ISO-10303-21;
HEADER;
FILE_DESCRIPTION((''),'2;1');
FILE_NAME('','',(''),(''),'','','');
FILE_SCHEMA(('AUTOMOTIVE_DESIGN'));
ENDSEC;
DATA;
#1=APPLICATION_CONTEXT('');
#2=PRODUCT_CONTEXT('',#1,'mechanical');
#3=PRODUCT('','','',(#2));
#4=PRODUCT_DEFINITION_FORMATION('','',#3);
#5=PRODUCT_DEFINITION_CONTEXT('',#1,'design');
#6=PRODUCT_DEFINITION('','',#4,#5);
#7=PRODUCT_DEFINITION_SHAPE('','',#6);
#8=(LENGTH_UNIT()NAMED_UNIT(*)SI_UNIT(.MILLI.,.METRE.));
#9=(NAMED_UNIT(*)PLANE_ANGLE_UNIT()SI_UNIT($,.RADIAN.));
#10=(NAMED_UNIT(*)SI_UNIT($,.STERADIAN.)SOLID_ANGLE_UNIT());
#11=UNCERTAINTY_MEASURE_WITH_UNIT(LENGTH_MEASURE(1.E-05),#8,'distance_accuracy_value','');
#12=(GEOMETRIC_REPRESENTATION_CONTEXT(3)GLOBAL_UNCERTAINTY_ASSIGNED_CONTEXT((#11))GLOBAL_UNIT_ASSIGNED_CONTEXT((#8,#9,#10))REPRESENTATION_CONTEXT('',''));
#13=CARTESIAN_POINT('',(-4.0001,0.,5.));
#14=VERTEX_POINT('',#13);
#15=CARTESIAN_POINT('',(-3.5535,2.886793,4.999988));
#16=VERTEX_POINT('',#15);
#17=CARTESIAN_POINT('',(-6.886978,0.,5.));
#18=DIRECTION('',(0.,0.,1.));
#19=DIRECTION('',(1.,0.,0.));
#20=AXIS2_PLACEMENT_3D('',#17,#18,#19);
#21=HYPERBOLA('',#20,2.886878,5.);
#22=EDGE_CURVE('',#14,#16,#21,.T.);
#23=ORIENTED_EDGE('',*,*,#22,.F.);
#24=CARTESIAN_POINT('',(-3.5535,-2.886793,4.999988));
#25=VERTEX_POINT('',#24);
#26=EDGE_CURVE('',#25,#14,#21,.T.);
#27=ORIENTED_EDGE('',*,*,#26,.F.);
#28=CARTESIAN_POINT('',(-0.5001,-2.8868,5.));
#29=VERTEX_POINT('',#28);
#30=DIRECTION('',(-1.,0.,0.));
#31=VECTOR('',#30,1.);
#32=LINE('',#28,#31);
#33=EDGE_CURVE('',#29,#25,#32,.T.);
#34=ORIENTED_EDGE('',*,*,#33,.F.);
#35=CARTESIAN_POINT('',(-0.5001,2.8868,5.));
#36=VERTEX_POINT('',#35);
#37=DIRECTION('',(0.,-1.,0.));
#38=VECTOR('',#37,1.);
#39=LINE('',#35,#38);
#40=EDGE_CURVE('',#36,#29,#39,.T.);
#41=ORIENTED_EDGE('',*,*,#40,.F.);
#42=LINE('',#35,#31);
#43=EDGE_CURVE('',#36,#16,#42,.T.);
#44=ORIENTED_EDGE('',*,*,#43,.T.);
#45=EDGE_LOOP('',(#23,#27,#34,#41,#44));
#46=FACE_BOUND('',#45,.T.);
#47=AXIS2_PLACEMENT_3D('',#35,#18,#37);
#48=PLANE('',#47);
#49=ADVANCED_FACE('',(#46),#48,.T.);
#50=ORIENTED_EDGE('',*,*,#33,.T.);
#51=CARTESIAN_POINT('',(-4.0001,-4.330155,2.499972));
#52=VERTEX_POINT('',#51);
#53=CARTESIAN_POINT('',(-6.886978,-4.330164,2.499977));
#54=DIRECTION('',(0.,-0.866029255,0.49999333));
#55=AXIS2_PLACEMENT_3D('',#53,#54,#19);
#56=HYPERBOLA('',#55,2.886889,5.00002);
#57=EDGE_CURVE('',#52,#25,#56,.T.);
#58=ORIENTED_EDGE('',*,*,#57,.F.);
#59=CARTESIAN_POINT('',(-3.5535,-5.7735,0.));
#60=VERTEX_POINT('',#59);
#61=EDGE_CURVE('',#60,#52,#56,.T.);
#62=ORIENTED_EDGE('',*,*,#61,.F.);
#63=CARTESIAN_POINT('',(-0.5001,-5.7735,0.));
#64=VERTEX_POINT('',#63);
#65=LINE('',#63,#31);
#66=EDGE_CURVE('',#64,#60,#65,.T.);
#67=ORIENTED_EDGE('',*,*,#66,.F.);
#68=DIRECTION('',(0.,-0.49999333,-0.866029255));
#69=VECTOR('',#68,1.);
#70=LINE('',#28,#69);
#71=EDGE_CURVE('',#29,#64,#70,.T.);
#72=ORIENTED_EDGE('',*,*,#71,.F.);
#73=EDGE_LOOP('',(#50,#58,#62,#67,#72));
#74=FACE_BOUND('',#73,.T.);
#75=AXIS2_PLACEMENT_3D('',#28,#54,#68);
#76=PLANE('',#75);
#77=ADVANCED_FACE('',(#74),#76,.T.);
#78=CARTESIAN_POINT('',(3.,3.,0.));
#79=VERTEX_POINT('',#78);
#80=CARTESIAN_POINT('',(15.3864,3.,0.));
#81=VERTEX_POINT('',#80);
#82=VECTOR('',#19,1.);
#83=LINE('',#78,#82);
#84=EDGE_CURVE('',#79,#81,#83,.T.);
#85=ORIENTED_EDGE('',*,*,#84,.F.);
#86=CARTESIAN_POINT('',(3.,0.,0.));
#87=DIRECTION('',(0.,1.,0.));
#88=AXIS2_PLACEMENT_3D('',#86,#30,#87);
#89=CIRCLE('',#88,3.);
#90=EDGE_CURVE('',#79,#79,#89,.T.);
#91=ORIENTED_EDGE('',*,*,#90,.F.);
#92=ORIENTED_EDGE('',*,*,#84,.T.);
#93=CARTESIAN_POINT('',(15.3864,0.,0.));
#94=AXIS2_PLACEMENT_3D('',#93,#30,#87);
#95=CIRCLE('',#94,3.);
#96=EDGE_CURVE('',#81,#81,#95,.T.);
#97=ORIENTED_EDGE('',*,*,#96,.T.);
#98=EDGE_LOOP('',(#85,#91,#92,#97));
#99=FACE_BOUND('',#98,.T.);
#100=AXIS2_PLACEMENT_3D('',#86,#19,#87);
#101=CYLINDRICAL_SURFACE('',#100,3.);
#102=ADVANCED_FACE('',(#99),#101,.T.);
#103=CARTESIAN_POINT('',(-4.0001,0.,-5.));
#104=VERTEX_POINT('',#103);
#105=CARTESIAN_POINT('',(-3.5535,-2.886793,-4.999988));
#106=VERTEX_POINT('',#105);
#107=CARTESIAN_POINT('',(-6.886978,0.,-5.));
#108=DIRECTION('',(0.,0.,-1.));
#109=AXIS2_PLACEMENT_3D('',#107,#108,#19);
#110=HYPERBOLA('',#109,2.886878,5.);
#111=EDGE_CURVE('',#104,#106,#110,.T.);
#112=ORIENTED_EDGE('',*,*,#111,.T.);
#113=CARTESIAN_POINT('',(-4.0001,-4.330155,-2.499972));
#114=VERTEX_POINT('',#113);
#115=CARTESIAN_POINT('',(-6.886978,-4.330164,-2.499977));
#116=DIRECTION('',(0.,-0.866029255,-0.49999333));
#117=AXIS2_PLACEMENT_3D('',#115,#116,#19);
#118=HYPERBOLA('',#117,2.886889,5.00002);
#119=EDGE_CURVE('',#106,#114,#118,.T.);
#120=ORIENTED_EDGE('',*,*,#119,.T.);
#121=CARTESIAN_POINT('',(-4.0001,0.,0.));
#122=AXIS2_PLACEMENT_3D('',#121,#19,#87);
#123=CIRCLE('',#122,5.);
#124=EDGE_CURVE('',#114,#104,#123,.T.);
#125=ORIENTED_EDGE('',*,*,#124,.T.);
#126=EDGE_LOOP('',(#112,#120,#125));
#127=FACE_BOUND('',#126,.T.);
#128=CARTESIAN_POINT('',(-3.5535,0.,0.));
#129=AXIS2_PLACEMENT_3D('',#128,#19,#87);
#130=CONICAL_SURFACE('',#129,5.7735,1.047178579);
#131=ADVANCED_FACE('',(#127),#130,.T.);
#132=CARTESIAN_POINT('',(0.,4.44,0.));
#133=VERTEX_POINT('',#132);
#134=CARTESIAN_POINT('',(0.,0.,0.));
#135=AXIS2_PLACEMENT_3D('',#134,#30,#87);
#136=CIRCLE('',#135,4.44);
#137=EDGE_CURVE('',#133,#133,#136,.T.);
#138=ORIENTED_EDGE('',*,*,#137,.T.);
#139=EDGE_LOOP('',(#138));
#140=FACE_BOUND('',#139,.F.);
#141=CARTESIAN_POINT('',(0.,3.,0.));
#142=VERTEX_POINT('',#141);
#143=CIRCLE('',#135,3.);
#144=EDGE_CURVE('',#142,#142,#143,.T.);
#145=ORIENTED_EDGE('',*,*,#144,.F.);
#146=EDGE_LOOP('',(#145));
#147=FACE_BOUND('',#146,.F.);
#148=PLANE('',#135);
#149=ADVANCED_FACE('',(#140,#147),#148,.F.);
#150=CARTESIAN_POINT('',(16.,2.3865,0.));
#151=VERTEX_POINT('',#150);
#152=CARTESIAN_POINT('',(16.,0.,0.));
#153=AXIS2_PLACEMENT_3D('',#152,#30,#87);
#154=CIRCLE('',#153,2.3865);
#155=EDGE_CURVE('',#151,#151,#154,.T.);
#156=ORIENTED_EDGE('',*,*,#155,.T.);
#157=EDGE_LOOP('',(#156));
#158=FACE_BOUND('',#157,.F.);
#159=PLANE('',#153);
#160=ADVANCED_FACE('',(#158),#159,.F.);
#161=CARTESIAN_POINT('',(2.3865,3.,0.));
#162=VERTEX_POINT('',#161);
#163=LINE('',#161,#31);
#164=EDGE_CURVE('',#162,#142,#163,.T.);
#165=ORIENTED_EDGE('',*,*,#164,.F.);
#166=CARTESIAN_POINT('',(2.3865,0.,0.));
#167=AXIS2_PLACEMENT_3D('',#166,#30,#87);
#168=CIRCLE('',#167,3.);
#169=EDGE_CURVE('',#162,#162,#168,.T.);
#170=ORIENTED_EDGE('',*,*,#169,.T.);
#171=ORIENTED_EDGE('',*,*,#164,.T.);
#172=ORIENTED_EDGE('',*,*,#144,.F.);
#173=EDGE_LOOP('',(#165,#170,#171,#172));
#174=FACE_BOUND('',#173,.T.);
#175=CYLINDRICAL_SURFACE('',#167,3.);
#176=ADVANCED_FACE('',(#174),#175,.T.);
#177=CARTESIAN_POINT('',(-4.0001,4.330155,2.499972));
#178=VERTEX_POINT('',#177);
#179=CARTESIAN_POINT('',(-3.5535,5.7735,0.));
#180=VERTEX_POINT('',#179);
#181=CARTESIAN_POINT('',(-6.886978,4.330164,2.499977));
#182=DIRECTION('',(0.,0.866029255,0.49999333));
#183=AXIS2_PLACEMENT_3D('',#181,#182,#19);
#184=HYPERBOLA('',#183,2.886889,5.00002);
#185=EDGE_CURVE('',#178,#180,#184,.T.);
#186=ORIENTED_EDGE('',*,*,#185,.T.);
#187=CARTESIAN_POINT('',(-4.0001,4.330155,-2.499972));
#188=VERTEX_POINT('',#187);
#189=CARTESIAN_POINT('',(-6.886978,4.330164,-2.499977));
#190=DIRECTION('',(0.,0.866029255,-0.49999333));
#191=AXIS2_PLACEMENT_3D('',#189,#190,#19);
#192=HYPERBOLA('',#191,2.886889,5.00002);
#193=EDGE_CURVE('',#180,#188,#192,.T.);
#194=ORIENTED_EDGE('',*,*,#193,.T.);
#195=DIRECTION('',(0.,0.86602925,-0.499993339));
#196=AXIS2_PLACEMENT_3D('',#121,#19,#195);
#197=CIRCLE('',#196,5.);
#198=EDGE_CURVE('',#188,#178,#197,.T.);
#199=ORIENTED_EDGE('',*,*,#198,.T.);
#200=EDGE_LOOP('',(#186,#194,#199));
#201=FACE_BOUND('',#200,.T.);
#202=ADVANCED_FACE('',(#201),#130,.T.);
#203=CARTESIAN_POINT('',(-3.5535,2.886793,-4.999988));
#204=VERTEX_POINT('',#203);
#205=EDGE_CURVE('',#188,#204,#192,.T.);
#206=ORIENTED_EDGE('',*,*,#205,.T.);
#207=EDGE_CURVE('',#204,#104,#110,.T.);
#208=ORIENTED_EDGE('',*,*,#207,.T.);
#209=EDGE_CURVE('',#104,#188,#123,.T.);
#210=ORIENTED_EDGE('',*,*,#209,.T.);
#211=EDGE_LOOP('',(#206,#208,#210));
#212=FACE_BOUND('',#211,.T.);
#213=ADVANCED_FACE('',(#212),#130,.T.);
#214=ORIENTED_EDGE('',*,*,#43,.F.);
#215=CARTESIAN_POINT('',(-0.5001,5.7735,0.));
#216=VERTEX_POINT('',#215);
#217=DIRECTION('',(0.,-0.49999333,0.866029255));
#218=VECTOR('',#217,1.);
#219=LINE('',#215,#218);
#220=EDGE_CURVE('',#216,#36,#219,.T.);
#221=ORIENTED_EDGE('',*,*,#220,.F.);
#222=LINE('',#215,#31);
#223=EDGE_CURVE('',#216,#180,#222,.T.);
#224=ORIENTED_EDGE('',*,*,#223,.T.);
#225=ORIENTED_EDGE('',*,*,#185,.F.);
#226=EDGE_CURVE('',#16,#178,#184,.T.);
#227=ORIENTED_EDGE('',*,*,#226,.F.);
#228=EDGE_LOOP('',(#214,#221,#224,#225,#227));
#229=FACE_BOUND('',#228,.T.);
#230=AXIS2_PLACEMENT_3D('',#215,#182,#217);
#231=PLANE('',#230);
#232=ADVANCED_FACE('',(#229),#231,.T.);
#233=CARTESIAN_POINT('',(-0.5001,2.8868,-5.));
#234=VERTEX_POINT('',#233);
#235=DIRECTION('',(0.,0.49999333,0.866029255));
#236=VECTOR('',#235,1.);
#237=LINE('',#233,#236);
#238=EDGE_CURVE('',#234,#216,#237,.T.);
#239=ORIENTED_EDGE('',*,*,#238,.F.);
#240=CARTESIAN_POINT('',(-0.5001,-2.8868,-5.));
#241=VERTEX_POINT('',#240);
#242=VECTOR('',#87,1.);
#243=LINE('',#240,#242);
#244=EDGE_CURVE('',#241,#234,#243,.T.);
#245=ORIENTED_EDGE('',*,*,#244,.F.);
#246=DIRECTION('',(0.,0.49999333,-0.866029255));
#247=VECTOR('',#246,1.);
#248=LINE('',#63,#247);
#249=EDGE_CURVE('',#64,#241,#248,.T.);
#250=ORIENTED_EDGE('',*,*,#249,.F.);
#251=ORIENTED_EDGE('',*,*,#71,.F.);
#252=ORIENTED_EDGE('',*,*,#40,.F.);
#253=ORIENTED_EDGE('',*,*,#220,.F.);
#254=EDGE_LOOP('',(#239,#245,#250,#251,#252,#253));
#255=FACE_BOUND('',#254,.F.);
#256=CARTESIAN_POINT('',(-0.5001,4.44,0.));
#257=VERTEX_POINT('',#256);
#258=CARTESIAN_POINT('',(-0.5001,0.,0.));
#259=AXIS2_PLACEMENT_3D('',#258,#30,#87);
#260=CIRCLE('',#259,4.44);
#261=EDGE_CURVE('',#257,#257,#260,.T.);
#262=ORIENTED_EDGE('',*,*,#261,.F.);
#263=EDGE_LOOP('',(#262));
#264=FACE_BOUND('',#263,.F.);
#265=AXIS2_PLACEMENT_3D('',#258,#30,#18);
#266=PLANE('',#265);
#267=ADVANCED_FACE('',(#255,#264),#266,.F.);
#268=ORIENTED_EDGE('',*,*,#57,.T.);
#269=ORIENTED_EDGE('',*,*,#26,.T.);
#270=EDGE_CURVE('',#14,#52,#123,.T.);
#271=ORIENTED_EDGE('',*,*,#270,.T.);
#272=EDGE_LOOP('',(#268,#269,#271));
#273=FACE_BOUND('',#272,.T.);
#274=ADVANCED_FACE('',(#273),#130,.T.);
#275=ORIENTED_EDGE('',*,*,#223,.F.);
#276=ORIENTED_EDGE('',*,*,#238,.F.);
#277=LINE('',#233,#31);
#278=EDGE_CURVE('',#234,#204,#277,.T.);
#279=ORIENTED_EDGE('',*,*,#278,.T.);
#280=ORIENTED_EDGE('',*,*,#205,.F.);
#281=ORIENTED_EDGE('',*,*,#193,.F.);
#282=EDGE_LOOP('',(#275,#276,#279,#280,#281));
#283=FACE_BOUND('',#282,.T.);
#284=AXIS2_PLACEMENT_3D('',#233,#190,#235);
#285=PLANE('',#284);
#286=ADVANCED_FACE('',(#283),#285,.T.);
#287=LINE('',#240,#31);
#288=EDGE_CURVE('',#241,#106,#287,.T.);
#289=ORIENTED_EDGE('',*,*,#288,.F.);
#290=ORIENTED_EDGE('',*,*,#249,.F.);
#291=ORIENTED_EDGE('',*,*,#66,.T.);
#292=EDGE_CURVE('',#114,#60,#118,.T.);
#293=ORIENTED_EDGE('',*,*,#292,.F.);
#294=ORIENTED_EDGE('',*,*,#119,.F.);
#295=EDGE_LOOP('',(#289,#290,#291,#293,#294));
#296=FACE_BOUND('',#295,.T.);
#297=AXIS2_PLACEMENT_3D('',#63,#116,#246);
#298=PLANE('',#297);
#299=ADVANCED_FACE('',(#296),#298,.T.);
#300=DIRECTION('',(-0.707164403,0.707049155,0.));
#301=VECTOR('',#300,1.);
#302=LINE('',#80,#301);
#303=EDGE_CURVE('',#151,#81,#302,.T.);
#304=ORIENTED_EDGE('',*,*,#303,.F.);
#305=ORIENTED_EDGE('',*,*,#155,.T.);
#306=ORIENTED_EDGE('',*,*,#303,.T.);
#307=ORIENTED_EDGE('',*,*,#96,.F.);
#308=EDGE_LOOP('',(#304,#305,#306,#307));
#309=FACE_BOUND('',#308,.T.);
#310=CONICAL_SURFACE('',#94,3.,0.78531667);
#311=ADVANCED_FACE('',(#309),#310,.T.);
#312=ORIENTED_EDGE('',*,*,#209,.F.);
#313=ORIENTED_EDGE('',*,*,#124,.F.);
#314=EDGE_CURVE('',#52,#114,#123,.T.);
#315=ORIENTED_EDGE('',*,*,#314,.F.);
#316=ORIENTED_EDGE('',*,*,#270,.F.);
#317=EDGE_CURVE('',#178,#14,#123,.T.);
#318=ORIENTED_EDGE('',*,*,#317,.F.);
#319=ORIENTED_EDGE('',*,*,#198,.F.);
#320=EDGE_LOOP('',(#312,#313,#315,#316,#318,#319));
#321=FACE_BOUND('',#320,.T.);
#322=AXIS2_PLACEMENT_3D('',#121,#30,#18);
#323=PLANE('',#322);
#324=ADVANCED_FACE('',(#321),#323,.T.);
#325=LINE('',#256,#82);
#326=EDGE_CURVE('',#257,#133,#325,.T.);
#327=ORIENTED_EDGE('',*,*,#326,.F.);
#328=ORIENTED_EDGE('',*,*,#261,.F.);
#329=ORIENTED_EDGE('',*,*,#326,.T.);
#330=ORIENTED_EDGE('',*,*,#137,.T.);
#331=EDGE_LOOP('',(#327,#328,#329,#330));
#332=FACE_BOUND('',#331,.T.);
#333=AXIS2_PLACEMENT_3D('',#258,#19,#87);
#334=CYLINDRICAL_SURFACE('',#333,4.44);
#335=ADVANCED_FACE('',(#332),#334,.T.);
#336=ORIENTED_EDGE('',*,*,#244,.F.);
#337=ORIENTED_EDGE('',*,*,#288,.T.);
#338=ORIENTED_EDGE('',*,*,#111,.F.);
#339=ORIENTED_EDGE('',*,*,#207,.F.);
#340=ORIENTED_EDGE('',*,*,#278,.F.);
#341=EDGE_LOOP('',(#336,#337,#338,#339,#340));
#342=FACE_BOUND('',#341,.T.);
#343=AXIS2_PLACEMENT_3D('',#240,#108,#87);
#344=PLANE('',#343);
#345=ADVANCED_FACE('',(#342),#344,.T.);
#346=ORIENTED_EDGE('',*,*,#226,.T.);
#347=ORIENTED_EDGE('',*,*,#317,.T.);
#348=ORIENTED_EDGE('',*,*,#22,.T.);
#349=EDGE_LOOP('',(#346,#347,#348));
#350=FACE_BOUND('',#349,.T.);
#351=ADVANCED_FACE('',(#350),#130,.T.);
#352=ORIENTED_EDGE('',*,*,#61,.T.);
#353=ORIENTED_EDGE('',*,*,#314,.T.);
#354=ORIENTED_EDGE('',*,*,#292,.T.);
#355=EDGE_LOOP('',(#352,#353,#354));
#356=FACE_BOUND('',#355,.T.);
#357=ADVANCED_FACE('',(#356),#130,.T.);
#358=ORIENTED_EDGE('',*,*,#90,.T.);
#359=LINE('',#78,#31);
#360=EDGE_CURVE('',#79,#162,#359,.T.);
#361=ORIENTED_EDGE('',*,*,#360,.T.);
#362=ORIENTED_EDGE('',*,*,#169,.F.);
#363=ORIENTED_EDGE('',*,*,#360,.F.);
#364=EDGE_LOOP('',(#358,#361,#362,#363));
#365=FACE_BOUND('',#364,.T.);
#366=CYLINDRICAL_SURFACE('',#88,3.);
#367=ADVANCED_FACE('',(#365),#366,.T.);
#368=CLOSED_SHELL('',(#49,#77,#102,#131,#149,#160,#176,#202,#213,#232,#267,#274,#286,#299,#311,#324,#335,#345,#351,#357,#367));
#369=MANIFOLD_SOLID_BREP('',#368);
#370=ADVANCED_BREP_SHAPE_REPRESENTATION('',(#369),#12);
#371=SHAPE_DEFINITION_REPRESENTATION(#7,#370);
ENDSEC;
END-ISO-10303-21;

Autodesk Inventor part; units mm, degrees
ref_plane "YZ Plane" through (0, 0, 0) normal (1, 0, 0) x (0, 1, 0)
ref_plane "XZ Plane" through (0, 0, 0) normal (0, 1, 0) x (-1, 0, 0)
sketch "Sketch1" plane through (0, 0, 0) normal (0, 0, 1) x (1, 0, 0)
  line L0 (0, 4.44) -> (0, 3)
  line L1 (3, 3) -> (16, 3)
  line L2 (16, 3) -> (16, 0)
  line L3 (16, 0) -> (-0.5001, 0)
  line L4 (-3.8001, 0) -> (19.3, 0) projected
  line L5 (-0.5001, 0) -> (-0.5001, 4.44)
  line L6 (-0.5001, 4.44) -> (0, 4.44)
  line L7 (3, 3) -> (2.3865, 3)
  line L8 (2.3865, 3) -> (0, 3)
  line L9 (0, -0.888) -> (0, 5.328) projected
  dimension "d0" = 16
  dimension "d1" = 13
  dimension "d2" = 6
  dimension "d9" = 0.5001
  dimension "d10" = 8.88
  dimension "d13" = 0.6136
  dimension "d14" = 6
revolve "Body" add sketch "Sketch1" angle 360 about axis through (16, 0, 0) along (-1, 0, 0)
sketch "Sketch2" plane through (-0.5001, 0, 0) normal (-1, 0, 0) x (0, 0, 1)
  line L0 (0, 5.7735) -> (5, 2.8868)
  line L1 (5, 2.8868) -> (5, -2.8868)
  line L2 (5, -2.8868) -> (0, -5.7735)
  line L3 (0, -5.7735) -> (-5, -2.8868)
  line L4 (-5, -2.8868) -> (-5, 2.8868)
  line L5 (-5, 2.8868) -> (0, 5.7735)
  point P0 (0, 0)
  point P1 (0, 0)
  dimension "d11" = 10
extrude "Head" add sketch "Sketch2" along normal blind 3.5
sketch "Sketch4" plane through (0, 0, 0) normal (0, 0, 1) x (1, 0, 0)
  line L0 (-4.0001, 5) -> (-4.0001, 5.7735)
  line L1 (-4.0001, 5.7735) -> (-3.5535, 5.7735)
  line L2 (-3.5535, 5.7735) -> (-4.0001, 5)
  line L3 (-4.7001, 0) -> (0.1999, 0) projected
  line L4 (-0.5001, 5.7735) -> (-4.0001, 5.7735) projected
  line L5 (-4.0001, 2.8868) -> (-4.0001, 5.7735) projected
  dimension "d5" = 30
  dimension "d19" = 10
revolve "Chamfer1" cut sketch "Sketch4" angle 360 about axis through (-10, 0, 0) along (1, 0, 0)
thread "Thread" size "M6x1" class "6g" standard "ISO Metric profile" length 13
chamfer "Chamfer2" distance 0.6135 distance2 0.6136 1 edges at (16, -3, 0) measured on face at (16, -0.301, 1.1526)
ref_plane "Work Plane1" through (1.525, 0, 0) normal (0, 0, 1) x (1, 0, 0)
equation "\"d0\" = NLG"
equation "\"d1\" = GEL"
equation "\"d2\" = GD"
equation "\"d10\" = SD2"
equation "\"d14\" = BDM"
equation "\"d11\" = SW"
equation "\"d3\" = KOH - SD"
equation "\"d5\" = ANG1"
equation "\"d19\" = SW0"
equation "\"d15\" = GEL"
equation "\"d6\" = -0.5 * SPD + 0.5 * GD"
equation "\"NLG\" = 16"
equation "\"GD\" = NND"
equation "\"BDM\" = NND"
equation "\"KOH\" = 4"
equation "\"GEL\" = 13"
equation "\"SW\" = 10"
equation "\"SW0\" = SW"
equation "\"SPD\" = NND - 1.2269 * PTC"
equation "\"SD2\" = 8.88"
equation "\"SD\" = 0.5"
equation "\"ANG1\" = 30deg"
equation "\"GAL\" = 0.61345 * PTC"
equation "\"GUL\" = 0.61345 * PTC"
equation "\"RR\" = 0.25"
equation "\"GD1\" = THREADDIA - 1.2269 * PTC"
equation "\"THREADDIA\" = 6"
equation "\"SDH\" = SD2"
equation "\"SDHG\" = 3"
equation "\"TOA\" = 30deg"
equation "\"PTC\" = 1"
equation "\"NND\" = 6"
equation "\"E0\" = 11.55"
properties part number "ISO 4017 - M6 x 16" material "Stainless Steel, 440C"
